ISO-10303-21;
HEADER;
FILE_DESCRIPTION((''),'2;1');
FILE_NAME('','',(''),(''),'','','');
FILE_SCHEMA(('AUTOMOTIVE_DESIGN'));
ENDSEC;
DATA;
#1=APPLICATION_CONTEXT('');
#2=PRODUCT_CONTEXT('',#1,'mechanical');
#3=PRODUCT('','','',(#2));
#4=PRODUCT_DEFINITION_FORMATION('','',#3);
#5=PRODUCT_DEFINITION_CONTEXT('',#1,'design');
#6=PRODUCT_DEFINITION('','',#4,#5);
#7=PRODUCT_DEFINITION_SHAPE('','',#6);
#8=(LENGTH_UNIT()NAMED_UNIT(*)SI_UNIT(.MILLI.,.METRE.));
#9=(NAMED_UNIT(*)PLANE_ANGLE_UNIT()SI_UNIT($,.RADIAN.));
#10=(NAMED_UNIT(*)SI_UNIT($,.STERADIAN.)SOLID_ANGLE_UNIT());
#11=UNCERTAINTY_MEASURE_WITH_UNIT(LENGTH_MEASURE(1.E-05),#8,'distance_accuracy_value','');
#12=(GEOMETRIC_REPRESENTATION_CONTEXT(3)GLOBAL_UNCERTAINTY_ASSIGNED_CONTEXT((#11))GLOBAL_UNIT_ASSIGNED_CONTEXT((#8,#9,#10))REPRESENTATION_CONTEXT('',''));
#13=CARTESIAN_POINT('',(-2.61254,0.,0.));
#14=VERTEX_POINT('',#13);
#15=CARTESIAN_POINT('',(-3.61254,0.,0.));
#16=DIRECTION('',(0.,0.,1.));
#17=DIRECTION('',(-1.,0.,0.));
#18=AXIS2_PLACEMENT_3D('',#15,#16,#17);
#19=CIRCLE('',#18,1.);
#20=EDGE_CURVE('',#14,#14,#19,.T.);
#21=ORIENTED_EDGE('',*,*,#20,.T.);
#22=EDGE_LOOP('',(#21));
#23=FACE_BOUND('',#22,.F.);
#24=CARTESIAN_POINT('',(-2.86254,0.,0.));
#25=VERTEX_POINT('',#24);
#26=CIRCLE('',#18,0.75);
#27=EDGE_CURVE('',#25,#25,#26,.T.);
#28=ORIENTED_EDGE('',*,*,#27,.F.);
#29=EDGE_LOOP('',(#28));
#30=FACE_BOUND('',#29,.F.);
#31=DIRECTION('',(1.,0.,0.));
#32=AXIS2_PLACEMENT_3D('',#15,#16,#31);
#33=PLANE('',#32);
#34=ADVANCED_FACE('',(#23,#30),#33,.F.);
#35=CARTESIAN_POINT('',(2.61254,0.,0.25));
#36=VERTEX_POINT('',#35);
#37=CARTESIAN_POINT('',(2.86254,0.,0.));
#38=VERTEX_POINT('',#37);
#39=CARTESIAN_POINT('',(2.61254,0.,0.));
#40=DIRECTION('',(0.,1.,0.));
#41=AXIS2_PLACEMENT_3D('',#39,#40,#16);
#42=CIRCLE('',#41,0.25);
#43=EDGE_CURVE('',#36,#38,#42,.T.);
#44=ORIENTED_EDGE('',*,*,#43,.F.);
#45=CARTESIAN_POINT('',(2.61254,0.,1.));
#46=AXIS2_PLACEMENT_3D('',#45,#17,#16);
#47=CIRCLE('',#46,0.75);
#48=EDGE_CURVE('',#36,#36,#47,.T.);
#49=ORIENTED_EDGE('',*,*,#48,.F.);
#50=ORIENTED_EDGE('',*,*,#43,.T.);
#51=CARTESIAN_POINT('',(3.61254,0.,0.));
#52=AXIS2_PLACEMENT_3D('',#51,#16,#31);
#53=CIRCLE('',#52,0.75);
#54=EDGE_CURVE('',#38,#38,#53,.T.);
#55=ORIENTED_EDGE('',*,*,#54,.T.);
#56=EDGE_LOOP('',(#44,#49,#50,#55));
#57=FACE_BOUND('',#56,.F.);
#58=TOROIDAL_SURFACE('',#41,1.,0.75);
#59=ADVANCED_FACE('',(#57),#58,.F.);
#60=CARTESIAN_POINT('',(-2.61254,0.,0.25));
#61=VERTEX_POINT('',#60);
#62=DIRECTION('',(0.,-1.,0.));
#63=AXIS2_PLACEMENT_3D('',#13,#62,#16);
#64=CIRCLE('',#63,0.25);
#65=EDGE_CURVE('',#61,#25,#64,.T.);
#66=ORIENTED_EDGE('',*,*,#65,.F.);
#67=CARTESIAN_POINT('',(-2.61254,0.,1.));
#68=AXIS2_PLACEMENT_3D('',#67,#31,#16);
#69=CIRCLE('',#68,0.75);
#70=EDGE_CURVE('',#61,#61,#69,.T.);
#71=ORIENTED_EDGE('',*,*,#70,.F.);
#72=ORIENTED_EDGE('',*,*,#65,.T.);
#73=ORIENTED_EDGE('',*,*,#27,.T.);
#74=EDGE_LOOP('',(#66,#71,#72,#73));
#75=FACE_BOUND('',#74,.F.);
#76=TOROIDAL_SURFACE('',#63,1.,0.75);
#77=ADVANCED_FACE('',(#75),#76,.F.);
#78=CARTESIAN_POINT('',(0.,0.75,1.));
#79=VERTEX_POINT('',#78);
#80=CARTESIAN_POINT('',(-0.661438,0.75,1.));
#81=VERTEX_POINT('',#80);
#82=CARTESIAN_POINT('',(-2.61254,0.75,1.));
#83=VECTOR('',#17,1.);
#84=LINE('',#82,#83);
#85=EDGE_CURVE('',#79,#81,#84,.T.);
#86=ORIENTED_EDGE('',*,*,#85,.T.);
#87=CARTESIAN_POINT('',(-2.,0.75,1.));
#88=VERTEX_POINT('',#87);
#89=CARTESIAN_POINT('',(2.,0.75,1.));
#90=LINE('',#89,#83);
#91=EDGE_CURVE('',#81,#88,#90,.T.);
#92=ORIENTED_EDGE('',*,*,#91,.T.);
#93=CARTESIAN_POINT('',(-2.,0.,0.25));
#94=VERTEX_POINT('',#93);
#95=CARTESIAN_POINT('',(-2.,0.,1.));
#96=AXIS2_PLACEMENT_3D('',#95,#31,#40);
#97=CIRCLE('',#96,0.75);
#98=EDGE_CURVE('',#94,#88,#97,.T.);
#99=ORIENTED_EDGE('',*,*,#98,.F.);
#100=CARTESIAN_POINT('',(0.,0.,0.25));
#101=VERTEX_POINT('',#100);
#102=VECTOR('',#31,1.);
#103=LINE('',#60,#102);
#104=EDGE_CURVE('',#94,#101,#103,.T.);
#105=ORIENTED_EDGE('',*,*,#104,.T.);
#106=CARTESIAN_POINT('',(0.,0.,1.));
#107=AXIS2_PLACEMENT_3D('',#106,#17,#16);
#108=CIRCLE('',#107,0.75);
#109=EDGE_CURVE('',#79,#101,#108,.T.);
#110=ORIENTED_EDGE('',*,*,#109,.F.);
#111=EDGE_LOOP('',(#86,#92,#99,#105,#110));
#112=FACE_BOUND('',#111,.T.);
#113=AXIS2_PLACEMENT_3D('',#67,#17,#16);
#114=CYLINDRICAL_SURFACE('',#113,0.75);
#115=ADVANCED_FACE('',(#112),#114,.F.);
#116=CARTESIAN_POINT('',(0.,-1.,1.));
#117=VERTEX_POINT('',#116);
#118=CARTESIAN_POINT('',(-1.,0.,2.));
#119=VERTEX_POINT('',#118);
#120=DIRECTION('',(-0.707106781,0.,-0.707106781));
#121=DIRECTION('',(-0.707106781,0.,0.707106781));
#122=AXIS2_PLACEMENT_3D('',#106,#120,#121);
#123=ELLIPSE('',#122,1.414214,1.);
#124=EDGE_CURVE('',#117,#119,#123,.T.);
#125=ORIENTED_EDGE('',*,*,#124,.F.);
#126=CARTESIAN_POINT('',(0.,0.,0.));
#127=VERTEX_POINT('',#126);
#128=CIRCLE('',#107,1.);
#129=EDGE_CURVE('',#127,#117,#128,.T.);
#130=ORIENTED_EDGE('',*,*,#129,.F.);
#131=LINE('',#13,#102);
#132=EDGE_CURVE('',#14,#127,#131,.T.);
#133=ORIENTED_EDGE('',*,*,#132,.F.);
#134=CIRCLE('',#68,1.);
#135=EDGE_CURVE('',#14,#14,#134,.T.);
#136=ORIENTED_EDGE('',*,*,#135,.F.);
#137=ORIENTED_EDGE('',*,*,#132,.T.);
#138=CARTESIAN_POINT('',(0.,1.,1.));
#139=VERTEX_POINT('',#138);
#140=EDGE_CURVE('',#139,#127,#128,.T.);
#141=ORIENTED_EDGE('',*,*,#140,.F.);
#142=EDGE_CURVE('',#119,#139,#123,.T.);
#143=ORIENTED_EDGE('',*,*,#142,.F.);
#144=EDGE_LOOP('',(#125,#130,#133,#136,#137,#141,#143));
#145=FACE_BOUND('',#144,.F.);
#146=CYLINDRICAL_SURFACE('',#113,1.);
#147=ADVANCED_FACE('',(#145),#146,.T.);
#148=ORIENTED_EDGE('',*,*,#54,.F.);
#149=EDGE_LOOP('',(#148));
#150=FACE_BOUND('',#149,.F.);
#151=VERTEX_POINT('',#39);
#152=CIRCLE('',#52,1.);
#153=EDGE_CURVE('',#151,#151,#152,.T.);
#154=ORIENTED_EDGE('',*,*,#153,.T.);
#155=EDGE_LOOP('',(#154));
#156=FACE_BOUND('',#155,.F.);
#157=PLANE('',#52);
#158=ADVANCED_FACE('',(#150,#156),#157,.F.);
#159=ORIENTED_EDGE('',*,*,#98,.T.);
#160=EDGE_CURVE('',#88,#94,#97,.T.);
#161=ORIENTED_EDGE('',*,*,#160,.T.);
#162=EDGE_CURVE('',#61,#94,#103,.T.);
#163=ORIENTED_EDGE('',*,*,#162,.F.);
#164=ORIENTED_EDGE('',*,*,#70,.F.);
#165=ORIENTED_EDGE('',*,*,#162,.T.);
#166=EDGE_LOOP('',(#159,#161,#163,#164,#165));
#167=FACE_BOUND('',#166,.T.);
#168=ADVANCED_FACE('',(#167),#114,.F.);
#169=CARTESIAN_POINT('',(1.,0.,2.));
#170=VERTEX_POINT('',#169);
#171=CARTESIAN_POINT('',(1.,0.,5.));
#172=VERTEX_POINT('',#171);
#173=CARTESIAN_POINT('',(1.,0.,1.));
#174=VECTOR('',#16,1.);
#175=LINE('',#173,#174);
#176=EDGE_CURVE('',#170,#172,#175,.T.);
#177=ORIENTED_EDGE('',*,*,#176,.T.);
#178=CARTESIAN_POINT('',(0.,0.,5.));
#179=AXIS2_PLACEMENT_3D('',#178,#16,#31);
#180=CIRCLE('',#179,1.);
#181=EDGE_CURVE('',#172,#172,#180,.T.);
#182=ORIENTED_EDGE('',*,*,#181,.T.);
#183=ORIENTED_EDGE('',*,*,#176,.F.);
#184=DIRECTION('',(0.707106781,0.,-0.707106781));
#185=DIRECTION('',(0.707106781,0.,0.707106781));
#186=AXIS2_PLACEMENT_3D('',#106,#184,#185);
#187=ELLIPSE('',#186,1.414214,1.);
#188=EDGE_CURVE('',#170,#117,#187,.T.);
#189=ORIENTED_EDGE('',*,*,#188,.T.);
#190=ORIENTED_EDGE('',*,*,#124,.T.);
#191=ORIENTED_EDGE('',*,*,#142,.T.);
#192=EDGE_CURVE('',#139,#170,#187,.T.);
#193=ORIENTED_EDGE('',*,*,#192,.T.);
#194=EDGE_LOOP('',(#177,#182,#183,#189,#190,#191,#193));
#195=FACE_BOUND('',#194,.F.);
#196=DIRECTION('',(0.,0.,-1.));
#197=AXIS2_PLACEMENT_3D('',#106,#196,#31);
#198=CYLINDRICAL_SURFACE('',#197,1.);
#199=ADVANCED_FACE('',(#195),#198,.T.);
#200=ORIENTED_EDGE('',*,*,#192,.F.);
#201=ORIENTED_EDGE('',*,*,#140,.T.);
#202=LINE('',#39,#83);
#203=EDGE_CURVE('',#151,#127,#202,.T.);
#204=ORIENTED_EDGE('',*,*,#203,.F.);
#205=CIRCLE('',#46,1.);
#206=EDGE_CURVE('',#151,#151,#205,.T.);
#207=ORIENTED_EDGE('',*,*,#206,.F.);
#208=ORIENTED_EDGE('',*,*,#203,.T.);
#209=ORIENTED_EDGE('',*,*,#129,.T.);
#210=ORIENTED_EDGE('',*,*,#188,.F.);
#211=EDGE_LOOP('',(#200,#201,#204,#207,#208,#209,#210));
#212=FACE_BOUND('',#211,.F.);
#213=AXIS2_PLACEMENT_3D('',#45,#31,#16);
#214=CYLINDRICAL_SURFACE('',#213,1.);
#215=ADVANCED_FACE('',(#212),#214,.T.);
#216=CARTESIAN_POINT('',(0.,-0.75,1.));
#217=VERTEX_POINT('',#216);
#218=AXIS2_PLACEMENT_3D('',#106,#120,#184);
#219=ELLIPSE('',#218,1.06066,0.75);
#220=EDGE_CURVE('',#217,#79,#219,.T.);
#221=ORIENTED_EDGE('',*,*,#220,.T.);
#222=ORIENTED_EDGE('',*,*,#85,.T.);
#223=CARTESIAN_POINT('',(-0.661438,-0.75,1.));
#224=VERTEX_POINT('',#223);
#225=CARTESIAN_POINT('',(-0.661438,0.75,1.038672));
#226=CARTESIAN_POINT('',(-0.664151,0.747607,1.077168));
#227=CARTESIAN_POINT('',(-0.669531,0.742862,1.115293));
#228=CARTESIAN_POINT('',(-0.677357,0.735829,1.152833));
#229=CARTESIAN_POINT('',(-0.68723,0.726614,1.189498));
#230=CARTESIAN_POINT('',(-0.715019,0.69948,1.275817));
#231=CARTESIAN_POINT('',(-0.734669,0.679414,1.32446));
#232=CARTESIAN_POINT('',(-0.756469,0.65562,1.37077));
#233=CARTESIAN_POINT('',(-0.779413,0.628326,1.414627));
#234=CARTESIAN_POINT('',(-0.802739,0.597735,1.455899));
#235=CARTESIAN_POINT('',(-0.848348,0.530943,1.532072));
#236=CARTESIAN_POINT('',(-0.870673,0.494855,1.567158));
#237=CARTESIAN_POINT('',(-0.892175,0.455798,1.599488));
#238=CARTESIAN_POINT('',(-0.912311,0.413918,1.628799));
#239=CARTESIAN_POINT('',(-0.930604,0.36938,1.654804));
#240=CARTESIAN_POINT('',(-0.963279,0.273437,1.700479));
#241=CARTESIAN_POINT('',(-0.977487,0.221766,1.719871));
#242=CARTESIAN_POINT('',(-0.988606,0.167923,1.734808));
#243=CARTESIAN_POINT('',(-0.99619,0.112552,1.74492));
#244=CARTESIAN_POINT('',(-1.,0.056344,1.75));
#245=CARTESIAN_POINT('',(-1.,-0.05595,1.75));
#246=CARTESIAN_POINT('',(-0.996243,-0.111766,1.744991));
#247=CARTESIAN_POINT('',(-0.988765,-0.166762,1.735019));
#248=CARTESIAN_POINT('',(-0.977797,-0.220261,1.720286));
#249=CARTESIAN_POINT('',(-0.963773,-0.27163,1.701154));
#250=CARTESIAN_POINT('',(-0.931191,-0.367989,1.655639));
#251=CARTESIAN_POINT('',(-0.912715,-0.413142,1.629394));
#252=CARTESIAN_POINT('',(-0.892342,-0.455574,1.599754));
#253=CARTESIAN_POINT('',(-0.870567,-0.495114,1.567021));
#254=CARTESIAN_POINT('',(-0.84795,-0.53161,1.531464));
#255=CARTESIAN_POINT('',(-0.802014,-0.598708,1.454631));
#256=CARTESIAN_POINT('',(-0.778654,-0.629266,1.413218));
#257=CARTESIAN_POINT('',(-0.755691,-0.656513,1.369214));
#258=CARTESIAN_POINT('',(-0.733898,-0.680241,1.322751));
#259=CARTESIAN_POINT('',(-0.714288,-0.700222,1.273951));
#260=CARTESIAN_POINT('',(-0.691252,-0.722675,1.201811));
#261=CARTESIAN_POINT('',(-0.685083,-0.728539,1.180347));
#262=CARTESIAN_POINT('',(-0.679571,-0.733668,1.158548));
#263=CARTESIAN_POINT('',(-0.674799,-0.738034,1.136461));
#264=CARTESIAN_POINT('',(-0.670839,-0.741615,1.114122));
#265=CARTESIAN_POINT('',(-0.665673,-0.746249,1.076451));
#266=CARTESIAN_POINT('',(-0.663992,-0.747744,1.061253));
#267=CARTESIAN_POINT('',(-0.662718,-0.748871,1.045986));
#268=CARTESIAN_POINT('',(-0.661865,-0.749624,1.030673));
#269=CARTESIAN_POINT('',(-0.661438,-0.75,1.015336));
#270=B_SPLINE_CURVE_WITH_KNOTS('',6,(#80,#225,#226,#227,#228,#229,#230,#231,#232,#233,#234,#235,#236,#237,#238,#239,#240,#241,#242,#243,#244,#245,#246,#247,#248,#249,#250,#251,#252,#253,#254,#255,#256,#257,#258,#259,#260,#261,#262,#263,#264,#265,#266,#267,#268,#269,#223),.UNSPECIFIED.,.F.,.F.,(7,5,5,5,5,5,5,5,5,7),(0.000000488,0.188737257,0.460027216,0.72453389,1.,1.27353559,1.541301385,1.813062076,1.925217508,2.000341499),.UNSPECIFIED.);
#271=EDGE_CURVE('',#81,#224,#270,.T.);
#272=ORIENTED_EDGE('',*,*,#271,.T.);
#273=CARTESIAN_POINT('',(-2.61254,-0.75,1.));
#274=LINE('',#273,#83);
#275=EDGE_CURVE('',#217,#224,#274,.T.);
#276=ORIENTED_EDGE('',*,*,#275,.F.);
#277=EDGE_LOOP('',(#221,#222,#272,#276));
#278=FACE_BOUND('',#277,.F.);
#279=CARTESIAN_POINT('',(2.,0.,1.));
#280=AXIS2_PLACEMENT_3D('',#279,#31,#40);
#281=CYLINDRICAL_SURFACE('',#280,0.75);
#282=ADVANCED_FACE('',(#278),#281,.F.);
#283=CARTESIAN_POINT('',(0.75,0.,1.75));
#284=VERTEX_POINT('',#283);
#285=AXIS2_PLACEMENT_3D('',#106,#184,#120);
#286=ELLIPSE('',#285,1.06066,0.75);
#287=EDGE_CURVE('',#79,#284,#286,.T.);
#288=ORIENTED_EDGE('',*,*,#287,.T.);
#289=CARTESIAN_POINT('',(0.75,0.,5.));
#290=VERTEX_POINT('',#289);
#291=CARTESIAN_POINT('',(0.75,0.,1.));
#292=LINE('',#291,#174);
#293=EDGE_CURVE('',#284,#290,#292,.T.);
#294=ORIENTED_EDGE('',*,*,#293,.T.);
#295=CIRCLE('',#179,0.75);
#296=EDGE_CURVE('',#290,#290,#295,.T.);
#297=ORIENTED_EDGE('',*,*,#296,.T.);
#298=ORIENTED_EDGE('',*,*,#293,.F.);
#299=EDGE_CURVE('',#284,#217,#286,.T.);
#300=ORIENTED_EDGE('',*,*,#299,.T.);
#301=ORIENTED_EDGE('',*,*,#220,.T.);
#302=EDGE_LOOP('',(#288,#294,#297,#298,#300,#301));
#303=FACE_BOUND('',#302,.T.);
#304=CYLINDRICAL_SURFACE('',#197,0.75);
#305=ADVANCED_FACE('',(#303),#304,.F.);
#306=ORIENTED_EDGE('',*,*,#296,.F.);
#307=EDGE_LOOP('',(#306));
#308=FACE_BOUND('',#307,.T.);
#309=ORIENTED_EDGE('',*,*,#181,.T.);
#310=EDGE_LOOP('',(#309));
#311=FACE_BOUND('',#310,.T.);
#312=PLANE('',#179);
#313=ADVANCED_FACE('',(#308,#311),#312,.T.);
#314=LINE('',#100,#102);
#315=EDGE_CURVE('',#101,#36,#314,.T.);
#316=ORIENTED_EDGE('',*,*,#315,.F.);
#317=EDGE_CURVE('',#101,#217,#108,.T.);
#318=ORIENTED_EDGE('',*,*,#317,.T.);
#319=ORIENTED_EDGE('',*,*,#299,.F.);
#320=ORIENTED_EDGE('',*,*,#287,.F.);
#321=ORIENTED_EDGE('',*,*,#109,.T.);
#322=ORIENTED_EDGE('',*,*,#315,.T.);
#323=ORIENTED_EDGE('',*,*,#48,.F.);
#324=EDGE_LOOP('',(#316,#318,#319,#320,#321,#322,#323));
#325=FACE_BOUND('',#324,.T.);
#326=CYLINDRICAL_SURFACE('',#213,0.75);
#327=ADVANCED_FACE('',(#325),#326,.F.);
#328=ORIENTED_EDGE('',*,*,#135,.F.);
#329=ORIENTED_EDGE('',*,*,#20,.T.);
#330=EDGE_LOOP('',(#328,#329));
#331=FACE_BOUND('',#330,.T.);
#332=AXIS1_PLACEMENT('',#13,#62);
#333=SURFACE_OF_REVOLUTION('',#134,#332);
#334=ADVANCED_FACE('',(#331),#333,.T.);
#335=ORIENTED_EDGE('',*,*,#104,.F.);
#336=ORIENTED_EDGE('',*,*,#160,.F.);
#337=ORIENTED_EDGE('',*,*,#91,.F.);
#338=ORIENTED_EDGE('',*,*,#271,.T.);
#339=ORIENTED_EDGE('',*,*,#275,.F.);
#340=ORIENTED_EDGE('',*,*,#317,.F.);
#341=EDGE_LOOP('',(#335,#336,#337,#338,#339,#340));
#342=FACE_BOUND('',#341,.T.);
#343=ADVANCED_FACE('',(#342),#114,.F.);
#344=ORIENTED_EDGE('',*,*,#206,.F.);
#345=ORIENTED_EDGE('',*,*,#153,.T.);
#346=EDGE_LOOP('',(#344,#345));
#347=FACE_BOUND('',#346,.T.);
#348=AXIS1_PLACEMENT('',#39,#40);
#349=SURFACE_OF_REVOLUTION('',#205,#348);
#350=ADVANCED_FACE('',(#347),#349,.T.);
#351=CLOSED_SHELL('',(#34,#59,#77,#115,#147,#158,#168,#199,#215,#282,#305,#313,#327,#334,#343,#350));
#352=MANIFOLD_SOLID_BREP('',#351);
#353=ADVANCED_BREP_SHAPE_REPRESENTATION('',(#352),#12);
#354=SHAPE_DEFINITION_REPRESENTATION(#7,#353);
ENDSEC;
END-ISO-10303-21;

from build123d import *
from build123d import SkipClean  # not in build123d's __all__

# Parameters (mm, degrees)
F0_R      = 1
F0_R_2    = 0.75
F4_DEPTH  = 2.61254
F5_DEPTH  = 2.61254
F8_R      = 1
F8_R_2    = 0.75
F9_DEPTH  = 4
F10_R     = 0.75
F11_DEPTH = 4
F13_R     = 0.75
F14_DEPTH = 4


# Not quite as in the source:
# - after a boolean that leaves OpenCascade's solid faulty, fix() repairs it


with BuildPart() as f2:
    # F2: sweep along a path in F1
    with BuildLine(Plane.XZ) as f2_path:
        ThreePointArc((-2.61254, 1), (-3.3196467812, 0.7071067812), (-3.61254, 0))
    # F0 (on Top) → F2 (sweep)
    with BuildSketch(Plane.XY):
        with Locations((-3.61254, 0)):
            Circle(F0_R)
        with Locations((-3.61254, 0)):
            Circle(F0_R_2, mode=Mode.SUBTRACT)
    sweep(path=f2_path.line)

    # F5 (add): a face of the model
    f5_faces = [f2.faces().sort_by_distance(p)[0] for p in [
        (-2.61254, 0, 1.9717157288),
    ]]


with BuildPart() as f3:
    # F3: sweep along a path in F1
    with BuildLine(Plane.XZ) as f3_path:
        ThreePointArc((2.61254, 1), (3.3196467812, 0.7071067812), (3.61254, 0))
    # F0 (on Top) → F3 (sweep)
    with BuildSketch(Plane.XY):
        with BuildLine():
            ThreePointArc((4.61254, 0), (3.61254, 1), (2.61254, 0))
            ThreePointArc((2.61254, 0), (3.61254, -1), (4.61254, 0))
        make_face()
        with BuildLine():
            ThreePointArc((4.36254, 0), (3.61254, -0.75), (2.86254, 0))
            ThreePointArc((2.86254, 0), (3.61254, 0.75), (4.36254, 0))
        make_face(mode=Mode.SUBTRACT)
    sweep(path=f3_path.line)

    # F4 (add): a face of the model
    f4_faces = [f3.faces().sort_by_distance(p)[0] for p in [
        (2.61254, 0.9717157288, 1),
    ]]
    extrude(f4_faces, amount=F4_DEPTH)


with BuildPart() as f2_1:
    add(f2.part, clean=False)

    add(f3.part)  # F5 merges F3
    extrude(f5_faces, amount=F5_DEPTH)

    # F6: union 

    # F8 (on offset) → F9 (join)
    with BuildSketch(Plane.XY.offset(1)):
        Circle(F8_R)
        Circle(F8_R_2, mode=Mode.SUBTRACT)
    with SkipClean():  # cleaning this boolean's faces spoils the solid; the shape is the same uncleaned
        extrude(amount=F9_DEPTH)

    # F10 (on face) → F11 (cut)
    with BuildSketch(Plane.XY.offset(5)):
        Circle(F10_R)
    extrude(amount=-F11_DEPTH, mode=Mode.SUBTRACT)

    add(f2_1.part.fix(), mode=Mode.REPLACE)

    # F13 (on offset) → F14 (cut)
    with BuildSketch(Plane.YZ.offset(2)):
        with Locations((0, 1)):
            Circle(F13_R)
    extrude(amount=-F14_DEPTH, mode=Mode.SUBTRACT)


solid = f2_1.part
